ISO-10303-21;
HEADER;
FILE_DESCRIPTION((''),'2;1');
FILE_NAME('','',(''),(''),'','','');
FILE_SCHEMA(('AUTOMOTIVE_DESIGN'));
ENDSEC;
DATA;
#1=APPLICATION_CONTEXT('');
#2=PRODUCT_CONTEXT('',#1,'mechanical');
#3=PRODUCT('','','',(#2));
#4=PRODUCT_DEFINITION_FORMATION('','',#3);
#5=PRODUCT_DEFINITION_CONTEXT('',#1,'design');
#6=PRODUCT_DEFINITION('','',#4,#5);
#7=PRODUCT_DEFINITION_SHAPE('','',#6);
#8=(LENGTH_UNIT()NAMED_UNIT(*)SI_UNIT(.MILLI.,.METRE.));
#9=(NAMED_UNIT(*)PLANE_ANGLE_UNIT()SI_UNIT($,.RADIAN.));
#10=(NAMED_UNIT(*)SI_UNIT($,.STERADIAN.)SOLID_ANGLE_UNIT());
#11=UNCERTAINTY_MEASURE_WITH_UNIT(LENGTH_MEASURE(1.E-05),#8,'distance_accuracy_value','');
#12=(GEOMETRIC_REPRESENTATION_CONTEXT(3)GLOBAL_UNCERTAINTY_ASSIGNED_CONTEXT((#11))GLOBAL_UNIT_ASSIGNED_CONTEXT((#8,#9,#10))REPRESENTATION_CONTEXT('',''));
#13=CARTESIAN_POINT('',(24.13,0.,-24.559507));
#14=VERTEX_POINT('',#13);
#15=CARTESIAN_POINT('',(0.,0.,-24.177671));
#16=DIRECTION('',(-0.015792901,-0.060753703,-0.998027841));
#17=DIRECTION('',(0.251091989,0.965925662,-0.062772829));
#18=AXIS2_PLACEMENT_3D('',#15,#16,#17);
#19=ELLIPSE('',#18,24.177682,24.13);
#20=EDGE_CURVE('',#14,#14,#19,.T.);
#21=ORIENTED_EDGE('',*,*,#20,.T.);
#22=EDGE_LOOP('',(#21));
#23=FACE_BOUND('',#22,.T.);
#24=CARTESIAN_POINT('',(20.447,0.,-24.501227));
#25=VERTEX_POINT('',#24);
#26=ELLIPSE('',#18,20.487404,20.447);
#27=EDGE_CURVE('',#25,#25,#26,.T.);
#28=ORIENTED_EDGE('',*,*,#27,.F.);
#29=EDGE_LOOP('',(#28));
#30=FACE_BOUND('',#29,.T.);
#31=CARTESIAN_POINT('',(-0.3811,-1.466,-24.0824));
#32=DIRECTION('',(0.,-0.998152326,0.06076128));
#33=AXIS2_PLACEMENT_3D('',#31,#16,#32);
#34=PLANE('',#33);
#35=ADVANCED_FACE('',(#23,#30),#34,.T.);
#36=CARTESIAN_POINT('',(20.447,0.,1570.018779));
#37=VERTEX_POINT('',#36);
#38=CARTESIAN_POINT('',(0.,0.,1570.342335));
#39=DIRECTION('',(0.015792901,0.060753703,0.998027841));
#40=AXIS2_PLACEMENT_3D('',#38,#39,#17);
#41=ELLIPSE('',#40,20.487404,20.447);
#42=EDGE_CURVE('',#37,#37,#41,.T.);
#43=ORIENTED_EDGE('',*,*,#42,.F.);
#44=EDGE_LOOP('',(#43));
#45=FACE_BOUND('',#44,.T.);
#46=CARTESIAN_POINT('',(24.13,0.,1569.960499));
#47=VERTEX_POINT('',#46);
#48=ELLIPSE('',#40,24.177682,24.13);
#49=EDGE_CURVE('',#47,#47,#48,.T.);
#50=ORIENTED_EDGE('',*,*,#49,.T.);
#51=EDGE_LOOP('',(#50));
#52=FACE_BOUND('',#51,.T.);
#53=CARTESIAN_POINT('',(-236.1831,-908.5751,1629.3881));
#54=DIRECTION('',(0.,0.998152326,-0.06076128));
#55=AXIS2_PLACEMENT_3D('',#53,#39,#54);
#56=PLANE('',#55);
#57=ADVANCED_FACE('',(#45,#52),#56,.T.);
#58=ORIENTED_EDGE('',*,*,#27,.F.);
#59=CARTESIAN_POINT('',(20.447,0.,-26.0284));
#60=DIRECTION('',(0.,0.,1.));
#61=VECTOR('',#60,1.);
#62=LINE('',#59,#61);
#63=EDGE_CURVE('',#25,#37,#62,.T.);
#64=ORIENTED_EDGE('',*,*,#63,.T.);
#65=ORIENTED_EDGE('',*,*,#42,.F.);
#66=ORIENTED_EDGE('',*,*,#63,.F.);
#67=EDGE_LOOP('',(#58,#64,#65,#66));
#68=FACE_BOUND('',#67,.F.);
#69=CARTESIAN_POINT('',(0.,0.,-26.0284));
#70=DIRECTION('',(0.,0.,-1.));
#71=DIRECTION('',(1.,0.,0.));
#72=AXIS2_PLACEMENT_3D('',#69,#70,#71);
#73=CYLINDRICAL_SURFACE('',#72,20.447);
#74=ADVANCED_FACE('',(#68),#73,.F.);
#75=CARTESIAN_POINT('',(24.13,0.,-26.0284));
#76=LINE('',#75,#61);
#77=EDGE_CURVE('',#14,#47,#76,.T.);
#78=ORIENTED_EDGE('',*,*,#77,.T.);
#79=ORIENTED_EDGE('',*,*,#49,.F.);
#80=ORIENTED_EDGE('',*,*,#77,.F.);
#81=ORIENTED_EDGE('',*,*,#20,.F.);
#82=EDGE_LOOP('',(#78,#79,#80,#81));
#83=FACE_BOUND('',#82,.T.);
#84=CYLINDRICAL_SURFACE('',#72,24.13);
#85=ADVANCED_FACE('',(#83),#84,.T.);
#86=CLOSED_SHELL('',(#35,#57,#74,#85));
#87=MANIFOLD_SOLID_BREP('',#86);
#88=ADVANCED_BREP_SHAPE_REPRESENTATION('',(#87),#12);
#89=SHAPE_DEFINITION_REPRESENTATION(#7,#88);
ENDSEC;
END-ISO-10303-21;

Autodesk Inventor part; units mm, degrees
ref_plane "Start Plane" through (0, 0, -26.0284) normal (0, 0, 1) x (1, 0, 0)
ref_plane "End Plane" through (0, 0, 1572.193) normal (0, 0, 1) x (1, 0, 0)
sketch "Sketch" plane through (0, 0, 0) normal (0, 0, 1) x (1, 0, 0)
  circle A0 centre (0, 0) radius 20.447
  circle A1 centre (0, 0) radius 24.13
  dimension "d0" = 48.26
  dimension "d1" = 3.683
extrude "Body" add sketch "Sketch" along normal up to surface (1598.2214 mm away) from surface at -26.0284
sketch "Sketch3" plane through (0, 0, 0) normal (0, 0, 1) x (1, 0, 0)
  line L0 (0, 0) -> (10, 0)
ref_plane "Work Plane3" through (0, 0, 0) normal (0, -1, 0) x (1, 0, 0)
ref_plane "Work Plane4" through (-0.3811, -1.466, -24.0824) normal (-0.0157929, -0.0607537, -0.9980278) x (0.8735323, -0.48651, 0.0157929)
split "Split1" plane through (-0.3811, -1.466, -24.0824) removes the side toward (-0.0157929, -0.0607537, -0.9980278)
ref_plane "Work Plane5" through (-236.1831, -908.5751, 1629.3881) normal (0.0157929, 0.0607537, 0.9980278) x (0.9998752, -0.0004802, -0.0157929)
split "Split2" plane through (-236.1831, -908.5751, 1629.3881) removes the side toward (0.0157929, 0.0607537, 0.9980278)
sketch "Sketch4" plane through (0, 0, 0) normal (0, -1, 0) x (1, 0, 0)
  line L0 (-2, -26.0284) -> (12, -26.0284) projected
  line L1 (-2, 1572.193) -> (12, 1572.193) projected
  dimension "d7" = 1598.2214
equation "\"d0\" = G_H"
equation "\"d1\" = G_T"
equation "\"d2\" = G_L"
equation "\"G_H\" = 48.26"
equation "\"G_T\" = 3.683"
equation "\"G_L\" = d7"
equation "\"G_OFFSET_START\" = 26.0284"
equation "\"G_OFFSET_END\" = 26.0284"
equation "\"d4\" = -G_OFFSET_START"
equation "\"d5\" = G_OFFSET_END + B_L"
equation "\"B_L\" = 1546.16461"
properties part number "ANSI - 1 1/2 x 0.145 - 62.922" material "Steel, Mild"
